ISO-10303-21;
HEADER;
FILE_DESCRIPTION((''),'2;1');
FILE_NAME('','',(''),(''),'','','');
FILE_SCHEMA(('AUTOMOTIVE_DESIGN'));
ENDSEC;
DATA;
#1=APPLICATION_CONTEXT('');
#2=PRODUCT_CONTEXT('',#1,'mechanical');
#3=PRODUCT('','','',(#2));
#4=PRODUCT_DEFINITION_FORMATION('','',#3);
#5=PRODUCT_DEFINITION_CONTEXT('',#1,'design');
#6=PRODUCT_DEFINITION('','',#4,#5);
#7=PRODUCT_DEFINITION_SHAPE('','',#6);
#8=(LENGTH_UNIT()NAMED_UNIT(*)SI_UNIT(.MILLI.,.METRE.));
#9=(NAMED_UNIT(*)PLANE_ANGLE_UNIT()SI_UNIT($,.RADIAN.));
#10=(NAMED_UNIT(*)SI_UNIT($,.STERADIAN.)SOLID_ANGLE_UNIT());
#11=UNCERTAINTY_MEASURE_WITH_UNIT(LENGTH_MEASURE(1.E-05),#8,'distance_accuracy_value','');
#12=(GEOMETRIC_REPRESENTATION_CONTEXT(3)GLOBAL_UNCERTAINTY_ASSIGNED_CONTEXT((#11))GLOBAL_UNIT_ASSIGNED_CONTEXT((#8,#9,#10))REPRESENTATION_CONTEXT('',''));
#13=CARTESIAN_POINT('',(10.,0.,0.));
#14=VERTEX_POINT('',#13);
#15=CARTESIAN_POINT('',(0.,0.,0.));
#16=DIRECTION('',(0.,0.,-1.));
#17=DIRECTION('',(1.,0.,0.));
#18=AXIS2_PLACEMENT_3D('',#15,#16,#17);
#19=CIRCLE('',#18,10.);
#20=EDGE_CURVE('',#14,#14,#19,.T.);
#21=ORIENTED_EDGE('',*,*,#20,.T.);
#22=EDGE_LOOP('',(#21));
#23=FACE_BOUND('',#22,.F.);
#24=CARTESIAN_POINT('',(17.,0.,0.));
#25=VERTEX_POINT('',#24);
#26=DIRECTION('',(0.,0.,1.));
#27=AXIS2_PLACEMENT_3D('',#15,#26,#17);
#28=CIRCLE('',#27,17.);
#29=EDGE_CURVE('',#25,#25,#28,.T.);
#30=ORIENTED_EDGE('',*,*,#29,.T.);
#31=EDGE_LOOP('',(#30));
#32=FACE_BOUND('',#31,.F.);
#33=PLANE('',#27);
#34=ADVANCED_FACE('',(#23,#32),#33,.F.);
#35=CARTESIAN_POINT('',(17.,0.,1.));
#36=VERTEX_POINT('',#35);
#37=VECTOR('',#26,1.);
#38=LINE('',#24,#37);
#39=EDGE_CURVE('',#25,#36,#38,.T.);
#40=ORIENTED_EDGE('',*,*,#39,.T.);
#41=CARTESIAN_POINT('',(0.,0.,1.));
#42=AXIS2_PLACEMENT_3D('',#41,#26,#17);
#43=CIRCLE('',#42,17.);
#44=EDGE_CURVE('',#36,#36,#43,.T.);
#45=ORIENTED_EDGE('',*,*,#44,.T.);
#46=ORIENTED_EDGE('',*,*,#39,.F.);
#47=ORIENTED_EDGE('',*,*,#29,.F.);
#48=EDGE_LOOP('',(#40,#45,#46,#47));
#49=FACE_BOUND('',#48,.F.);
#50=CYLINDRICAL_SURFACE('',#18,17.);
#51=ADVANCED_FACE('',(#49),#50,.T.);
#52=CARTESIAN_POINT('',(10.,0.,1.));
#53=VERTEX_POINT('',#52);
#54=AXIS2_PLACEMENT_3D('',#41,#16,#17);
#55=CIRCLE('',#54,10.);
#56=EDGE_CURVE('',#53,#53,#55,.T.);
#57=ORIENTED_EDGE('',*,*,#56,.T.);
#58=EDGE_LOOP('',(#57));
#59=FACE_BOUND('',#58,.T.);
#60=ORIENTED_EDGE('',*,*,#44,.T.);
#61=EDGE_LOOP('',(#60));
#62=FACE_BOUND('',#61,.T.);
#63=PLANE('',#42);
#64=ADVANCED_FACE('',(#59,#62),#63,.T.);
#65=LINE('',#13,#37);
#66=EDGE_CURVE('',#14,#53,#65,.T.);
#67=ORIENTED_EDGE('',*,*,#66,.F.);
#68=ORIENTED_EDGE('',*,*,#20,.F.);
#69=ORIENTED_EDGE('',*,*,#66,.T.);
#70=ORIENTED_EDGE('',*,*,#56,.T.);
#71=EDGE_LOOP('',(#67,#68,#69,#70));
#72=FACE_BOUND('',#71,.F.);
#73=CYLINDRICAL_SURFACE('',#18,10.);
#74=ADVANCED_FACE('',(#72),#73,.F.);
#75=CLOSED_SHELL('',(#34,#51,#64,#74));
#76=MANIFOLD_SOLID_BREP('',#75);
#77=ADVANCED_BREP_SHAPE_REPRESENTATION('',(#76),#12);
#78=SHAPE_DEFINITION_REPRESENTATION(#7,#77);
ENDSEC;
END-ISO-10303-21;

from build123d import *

# Parameters (mm, degrees)
F0_R     = 17
F0_R_2   = 16.2
F1_DEPTH = 1
F3_R     = 10
F4_DEPTH = 3


# Not quite as in the source:
# - a feature names something its author has since deleted; it is built from what else it names
# - the program builds the solid bodies; features that only make, move or delete a surface that nothing else refers to are left out


with BuildPart() as f1:
    # F0 (on Top) → F1 (new body)
    with BuildSketch(Plane.XY):
        Circle(F0_R)
        Circle(F0_R_2, mode=Mode.SUBTRACT)
        Circle(F0_R_2)
    extrude(amount=F1_DEPTH)

    # F3 (on face) → F4 (cut)
    with BuildSketch(Plane(origin=(0, 0, 0), x_dir=(1, 0, 0), z_dir=(0, 0, -1))):
        Circle(F3_R)
    extrude(amount=-F4_DEPTH, mode=Mode.SUBTRACT)


solid = f1.part
